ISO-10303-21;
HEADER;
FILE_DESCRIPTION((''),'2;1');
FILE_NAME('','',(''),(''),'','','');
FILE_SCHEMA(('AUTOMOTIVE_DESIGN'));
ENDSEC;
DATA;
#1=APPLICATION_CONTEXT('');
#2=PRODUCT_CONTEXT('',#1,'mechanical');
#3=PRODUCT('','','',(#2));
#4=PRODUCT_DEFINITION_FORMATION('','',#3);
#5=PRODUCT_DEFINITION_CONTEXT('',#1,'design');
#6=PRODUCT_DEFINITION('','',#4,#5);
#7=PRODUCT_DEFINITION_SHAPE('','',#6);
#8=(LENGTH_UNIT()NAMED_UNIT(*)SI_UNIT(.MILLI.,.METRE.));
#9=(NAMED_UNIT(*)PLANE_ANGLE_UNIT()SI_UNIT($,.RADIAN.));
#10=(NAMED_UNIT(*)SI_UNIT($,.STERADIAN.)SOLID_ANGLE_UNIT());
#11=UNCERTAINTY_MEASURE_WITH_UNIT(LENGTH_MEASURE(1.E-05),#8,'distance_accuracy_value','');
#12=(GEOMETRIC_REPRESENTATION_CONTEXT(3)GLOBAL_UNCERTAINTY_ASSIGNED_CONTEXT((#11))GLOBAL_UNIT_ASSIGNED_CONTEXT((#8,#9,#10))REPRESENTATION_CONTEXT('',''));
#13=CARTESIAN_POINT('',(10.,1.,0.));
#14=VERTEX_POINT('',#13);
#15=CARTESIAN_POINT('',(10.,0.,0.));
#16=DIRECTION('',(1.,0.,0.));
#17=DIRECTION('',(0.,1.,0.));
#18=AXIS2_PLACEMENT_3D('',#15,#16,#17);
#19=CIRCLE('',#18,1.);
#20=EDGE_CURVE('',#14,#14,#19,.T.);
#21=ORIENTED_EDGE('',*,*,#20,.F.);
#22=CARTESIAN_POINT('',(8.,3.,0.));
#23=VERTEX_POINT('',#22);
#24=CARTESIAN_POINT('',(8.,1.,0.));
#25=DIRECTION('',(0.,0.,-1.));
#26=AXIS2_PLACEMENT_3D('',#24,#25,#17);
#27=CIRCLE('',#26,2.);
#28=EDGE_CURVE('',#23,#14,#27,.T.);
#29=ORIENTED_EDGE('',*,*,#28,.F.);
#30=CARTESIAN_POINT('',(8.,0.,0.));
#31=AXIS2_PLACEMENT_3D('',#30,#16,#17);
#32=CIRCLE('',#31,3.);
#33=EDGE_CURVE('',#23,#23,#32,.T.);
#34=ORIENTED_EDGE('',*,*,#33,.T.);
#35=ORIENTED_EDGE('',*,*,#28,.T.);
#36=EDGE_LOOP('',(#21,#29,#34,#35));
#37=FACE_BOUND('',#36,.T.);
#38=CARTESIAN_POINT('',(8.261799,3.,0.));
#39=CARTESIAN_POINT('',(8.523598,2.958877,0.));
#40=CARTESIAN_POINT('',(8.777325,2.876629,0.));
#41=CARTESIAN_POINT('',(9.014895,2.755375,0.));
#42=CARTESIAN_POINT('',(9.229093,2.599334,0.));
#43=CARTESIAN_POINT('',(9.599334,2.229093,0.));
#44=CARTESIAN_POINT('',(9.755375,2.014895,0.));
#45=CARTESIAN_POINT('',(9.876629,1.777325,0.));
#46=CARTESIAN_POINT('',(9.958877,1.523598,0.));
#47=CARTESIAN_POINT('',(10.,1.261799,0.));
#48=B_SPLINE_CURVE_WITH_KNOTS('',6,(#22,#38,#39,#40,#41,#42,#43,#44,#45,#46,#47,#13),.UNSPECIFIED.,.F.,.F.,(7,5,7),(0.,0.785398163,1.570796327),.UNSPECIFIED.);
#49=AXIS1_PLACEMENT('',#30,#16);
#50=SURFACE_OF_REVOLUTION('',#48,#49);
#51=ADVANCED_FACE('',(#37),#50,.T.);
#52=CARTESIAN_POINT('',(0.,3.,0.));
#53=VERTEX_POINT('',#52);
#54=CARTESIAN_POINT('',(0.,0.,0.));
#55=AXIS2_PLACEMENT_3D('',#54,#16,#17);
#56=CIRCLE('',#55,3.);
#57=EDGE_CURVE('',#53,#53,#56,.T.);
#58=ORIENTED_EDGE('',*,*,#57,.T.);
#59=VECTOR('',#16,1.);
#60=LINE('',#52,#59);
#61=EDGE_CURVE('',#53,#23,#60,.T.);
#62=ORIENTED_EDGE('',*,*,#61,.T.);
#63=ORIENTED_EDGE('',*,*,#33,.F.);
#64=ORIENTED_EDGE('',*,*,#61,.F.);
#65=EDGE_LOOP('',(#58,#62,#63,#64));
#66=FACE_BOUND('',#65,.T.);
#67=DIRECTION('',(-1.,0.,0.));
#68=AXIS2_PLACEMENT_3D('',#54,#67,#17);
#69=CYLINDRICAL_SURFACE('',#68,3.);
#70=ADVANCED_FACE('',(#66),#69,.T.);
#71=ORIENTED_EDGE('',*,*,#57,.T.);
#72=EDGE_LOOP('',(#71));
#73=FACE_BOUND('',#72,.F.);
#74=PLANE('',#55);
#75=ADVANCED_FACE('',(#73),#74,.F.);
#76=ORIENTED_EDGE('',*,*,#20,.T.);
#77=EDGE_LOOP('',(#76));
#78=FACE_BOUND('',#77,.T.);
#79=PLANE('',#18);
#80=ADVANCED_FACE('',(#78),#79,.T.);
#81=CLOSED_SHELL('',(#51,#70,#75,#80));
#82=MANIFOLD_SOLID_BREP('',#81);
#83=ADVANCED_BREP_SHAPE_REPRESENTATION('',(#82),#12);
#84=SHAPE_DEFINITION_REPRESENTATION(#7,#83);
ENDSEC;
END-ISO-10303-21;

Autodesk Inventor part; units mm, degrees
ref_plane "YZ Plane" through (0, 0, 0) normal (1, 0, 0) x (0, 1, 0)
ref_plane "XZ Plane" through (0, 0, 0) normal (0, 1, 0) x (-1, 0, 0)
ref_plane "XY Plane" through (0, 0, 0) normal (0, 0, 1) x (1, 0, 0)
sketch "Sketch1" plane through (0, 0, 0) normal (1, 0, 0) x (0, 1, 0)
  point P0 (0, 0)
sketch "Sketch2" plane through (0, 0, 0) normal (1, 0, 0) x (0, 1, 0)
  circle A0 centre (0, 0) radius 3
  dimension "d0" = 6
extrude "Extrusion1" add sketch "Sketch2" along normal blind 10
fillet "Face Fillet1" radius 2 1 edges at (10, -3, 0)
properties part number "extension"
